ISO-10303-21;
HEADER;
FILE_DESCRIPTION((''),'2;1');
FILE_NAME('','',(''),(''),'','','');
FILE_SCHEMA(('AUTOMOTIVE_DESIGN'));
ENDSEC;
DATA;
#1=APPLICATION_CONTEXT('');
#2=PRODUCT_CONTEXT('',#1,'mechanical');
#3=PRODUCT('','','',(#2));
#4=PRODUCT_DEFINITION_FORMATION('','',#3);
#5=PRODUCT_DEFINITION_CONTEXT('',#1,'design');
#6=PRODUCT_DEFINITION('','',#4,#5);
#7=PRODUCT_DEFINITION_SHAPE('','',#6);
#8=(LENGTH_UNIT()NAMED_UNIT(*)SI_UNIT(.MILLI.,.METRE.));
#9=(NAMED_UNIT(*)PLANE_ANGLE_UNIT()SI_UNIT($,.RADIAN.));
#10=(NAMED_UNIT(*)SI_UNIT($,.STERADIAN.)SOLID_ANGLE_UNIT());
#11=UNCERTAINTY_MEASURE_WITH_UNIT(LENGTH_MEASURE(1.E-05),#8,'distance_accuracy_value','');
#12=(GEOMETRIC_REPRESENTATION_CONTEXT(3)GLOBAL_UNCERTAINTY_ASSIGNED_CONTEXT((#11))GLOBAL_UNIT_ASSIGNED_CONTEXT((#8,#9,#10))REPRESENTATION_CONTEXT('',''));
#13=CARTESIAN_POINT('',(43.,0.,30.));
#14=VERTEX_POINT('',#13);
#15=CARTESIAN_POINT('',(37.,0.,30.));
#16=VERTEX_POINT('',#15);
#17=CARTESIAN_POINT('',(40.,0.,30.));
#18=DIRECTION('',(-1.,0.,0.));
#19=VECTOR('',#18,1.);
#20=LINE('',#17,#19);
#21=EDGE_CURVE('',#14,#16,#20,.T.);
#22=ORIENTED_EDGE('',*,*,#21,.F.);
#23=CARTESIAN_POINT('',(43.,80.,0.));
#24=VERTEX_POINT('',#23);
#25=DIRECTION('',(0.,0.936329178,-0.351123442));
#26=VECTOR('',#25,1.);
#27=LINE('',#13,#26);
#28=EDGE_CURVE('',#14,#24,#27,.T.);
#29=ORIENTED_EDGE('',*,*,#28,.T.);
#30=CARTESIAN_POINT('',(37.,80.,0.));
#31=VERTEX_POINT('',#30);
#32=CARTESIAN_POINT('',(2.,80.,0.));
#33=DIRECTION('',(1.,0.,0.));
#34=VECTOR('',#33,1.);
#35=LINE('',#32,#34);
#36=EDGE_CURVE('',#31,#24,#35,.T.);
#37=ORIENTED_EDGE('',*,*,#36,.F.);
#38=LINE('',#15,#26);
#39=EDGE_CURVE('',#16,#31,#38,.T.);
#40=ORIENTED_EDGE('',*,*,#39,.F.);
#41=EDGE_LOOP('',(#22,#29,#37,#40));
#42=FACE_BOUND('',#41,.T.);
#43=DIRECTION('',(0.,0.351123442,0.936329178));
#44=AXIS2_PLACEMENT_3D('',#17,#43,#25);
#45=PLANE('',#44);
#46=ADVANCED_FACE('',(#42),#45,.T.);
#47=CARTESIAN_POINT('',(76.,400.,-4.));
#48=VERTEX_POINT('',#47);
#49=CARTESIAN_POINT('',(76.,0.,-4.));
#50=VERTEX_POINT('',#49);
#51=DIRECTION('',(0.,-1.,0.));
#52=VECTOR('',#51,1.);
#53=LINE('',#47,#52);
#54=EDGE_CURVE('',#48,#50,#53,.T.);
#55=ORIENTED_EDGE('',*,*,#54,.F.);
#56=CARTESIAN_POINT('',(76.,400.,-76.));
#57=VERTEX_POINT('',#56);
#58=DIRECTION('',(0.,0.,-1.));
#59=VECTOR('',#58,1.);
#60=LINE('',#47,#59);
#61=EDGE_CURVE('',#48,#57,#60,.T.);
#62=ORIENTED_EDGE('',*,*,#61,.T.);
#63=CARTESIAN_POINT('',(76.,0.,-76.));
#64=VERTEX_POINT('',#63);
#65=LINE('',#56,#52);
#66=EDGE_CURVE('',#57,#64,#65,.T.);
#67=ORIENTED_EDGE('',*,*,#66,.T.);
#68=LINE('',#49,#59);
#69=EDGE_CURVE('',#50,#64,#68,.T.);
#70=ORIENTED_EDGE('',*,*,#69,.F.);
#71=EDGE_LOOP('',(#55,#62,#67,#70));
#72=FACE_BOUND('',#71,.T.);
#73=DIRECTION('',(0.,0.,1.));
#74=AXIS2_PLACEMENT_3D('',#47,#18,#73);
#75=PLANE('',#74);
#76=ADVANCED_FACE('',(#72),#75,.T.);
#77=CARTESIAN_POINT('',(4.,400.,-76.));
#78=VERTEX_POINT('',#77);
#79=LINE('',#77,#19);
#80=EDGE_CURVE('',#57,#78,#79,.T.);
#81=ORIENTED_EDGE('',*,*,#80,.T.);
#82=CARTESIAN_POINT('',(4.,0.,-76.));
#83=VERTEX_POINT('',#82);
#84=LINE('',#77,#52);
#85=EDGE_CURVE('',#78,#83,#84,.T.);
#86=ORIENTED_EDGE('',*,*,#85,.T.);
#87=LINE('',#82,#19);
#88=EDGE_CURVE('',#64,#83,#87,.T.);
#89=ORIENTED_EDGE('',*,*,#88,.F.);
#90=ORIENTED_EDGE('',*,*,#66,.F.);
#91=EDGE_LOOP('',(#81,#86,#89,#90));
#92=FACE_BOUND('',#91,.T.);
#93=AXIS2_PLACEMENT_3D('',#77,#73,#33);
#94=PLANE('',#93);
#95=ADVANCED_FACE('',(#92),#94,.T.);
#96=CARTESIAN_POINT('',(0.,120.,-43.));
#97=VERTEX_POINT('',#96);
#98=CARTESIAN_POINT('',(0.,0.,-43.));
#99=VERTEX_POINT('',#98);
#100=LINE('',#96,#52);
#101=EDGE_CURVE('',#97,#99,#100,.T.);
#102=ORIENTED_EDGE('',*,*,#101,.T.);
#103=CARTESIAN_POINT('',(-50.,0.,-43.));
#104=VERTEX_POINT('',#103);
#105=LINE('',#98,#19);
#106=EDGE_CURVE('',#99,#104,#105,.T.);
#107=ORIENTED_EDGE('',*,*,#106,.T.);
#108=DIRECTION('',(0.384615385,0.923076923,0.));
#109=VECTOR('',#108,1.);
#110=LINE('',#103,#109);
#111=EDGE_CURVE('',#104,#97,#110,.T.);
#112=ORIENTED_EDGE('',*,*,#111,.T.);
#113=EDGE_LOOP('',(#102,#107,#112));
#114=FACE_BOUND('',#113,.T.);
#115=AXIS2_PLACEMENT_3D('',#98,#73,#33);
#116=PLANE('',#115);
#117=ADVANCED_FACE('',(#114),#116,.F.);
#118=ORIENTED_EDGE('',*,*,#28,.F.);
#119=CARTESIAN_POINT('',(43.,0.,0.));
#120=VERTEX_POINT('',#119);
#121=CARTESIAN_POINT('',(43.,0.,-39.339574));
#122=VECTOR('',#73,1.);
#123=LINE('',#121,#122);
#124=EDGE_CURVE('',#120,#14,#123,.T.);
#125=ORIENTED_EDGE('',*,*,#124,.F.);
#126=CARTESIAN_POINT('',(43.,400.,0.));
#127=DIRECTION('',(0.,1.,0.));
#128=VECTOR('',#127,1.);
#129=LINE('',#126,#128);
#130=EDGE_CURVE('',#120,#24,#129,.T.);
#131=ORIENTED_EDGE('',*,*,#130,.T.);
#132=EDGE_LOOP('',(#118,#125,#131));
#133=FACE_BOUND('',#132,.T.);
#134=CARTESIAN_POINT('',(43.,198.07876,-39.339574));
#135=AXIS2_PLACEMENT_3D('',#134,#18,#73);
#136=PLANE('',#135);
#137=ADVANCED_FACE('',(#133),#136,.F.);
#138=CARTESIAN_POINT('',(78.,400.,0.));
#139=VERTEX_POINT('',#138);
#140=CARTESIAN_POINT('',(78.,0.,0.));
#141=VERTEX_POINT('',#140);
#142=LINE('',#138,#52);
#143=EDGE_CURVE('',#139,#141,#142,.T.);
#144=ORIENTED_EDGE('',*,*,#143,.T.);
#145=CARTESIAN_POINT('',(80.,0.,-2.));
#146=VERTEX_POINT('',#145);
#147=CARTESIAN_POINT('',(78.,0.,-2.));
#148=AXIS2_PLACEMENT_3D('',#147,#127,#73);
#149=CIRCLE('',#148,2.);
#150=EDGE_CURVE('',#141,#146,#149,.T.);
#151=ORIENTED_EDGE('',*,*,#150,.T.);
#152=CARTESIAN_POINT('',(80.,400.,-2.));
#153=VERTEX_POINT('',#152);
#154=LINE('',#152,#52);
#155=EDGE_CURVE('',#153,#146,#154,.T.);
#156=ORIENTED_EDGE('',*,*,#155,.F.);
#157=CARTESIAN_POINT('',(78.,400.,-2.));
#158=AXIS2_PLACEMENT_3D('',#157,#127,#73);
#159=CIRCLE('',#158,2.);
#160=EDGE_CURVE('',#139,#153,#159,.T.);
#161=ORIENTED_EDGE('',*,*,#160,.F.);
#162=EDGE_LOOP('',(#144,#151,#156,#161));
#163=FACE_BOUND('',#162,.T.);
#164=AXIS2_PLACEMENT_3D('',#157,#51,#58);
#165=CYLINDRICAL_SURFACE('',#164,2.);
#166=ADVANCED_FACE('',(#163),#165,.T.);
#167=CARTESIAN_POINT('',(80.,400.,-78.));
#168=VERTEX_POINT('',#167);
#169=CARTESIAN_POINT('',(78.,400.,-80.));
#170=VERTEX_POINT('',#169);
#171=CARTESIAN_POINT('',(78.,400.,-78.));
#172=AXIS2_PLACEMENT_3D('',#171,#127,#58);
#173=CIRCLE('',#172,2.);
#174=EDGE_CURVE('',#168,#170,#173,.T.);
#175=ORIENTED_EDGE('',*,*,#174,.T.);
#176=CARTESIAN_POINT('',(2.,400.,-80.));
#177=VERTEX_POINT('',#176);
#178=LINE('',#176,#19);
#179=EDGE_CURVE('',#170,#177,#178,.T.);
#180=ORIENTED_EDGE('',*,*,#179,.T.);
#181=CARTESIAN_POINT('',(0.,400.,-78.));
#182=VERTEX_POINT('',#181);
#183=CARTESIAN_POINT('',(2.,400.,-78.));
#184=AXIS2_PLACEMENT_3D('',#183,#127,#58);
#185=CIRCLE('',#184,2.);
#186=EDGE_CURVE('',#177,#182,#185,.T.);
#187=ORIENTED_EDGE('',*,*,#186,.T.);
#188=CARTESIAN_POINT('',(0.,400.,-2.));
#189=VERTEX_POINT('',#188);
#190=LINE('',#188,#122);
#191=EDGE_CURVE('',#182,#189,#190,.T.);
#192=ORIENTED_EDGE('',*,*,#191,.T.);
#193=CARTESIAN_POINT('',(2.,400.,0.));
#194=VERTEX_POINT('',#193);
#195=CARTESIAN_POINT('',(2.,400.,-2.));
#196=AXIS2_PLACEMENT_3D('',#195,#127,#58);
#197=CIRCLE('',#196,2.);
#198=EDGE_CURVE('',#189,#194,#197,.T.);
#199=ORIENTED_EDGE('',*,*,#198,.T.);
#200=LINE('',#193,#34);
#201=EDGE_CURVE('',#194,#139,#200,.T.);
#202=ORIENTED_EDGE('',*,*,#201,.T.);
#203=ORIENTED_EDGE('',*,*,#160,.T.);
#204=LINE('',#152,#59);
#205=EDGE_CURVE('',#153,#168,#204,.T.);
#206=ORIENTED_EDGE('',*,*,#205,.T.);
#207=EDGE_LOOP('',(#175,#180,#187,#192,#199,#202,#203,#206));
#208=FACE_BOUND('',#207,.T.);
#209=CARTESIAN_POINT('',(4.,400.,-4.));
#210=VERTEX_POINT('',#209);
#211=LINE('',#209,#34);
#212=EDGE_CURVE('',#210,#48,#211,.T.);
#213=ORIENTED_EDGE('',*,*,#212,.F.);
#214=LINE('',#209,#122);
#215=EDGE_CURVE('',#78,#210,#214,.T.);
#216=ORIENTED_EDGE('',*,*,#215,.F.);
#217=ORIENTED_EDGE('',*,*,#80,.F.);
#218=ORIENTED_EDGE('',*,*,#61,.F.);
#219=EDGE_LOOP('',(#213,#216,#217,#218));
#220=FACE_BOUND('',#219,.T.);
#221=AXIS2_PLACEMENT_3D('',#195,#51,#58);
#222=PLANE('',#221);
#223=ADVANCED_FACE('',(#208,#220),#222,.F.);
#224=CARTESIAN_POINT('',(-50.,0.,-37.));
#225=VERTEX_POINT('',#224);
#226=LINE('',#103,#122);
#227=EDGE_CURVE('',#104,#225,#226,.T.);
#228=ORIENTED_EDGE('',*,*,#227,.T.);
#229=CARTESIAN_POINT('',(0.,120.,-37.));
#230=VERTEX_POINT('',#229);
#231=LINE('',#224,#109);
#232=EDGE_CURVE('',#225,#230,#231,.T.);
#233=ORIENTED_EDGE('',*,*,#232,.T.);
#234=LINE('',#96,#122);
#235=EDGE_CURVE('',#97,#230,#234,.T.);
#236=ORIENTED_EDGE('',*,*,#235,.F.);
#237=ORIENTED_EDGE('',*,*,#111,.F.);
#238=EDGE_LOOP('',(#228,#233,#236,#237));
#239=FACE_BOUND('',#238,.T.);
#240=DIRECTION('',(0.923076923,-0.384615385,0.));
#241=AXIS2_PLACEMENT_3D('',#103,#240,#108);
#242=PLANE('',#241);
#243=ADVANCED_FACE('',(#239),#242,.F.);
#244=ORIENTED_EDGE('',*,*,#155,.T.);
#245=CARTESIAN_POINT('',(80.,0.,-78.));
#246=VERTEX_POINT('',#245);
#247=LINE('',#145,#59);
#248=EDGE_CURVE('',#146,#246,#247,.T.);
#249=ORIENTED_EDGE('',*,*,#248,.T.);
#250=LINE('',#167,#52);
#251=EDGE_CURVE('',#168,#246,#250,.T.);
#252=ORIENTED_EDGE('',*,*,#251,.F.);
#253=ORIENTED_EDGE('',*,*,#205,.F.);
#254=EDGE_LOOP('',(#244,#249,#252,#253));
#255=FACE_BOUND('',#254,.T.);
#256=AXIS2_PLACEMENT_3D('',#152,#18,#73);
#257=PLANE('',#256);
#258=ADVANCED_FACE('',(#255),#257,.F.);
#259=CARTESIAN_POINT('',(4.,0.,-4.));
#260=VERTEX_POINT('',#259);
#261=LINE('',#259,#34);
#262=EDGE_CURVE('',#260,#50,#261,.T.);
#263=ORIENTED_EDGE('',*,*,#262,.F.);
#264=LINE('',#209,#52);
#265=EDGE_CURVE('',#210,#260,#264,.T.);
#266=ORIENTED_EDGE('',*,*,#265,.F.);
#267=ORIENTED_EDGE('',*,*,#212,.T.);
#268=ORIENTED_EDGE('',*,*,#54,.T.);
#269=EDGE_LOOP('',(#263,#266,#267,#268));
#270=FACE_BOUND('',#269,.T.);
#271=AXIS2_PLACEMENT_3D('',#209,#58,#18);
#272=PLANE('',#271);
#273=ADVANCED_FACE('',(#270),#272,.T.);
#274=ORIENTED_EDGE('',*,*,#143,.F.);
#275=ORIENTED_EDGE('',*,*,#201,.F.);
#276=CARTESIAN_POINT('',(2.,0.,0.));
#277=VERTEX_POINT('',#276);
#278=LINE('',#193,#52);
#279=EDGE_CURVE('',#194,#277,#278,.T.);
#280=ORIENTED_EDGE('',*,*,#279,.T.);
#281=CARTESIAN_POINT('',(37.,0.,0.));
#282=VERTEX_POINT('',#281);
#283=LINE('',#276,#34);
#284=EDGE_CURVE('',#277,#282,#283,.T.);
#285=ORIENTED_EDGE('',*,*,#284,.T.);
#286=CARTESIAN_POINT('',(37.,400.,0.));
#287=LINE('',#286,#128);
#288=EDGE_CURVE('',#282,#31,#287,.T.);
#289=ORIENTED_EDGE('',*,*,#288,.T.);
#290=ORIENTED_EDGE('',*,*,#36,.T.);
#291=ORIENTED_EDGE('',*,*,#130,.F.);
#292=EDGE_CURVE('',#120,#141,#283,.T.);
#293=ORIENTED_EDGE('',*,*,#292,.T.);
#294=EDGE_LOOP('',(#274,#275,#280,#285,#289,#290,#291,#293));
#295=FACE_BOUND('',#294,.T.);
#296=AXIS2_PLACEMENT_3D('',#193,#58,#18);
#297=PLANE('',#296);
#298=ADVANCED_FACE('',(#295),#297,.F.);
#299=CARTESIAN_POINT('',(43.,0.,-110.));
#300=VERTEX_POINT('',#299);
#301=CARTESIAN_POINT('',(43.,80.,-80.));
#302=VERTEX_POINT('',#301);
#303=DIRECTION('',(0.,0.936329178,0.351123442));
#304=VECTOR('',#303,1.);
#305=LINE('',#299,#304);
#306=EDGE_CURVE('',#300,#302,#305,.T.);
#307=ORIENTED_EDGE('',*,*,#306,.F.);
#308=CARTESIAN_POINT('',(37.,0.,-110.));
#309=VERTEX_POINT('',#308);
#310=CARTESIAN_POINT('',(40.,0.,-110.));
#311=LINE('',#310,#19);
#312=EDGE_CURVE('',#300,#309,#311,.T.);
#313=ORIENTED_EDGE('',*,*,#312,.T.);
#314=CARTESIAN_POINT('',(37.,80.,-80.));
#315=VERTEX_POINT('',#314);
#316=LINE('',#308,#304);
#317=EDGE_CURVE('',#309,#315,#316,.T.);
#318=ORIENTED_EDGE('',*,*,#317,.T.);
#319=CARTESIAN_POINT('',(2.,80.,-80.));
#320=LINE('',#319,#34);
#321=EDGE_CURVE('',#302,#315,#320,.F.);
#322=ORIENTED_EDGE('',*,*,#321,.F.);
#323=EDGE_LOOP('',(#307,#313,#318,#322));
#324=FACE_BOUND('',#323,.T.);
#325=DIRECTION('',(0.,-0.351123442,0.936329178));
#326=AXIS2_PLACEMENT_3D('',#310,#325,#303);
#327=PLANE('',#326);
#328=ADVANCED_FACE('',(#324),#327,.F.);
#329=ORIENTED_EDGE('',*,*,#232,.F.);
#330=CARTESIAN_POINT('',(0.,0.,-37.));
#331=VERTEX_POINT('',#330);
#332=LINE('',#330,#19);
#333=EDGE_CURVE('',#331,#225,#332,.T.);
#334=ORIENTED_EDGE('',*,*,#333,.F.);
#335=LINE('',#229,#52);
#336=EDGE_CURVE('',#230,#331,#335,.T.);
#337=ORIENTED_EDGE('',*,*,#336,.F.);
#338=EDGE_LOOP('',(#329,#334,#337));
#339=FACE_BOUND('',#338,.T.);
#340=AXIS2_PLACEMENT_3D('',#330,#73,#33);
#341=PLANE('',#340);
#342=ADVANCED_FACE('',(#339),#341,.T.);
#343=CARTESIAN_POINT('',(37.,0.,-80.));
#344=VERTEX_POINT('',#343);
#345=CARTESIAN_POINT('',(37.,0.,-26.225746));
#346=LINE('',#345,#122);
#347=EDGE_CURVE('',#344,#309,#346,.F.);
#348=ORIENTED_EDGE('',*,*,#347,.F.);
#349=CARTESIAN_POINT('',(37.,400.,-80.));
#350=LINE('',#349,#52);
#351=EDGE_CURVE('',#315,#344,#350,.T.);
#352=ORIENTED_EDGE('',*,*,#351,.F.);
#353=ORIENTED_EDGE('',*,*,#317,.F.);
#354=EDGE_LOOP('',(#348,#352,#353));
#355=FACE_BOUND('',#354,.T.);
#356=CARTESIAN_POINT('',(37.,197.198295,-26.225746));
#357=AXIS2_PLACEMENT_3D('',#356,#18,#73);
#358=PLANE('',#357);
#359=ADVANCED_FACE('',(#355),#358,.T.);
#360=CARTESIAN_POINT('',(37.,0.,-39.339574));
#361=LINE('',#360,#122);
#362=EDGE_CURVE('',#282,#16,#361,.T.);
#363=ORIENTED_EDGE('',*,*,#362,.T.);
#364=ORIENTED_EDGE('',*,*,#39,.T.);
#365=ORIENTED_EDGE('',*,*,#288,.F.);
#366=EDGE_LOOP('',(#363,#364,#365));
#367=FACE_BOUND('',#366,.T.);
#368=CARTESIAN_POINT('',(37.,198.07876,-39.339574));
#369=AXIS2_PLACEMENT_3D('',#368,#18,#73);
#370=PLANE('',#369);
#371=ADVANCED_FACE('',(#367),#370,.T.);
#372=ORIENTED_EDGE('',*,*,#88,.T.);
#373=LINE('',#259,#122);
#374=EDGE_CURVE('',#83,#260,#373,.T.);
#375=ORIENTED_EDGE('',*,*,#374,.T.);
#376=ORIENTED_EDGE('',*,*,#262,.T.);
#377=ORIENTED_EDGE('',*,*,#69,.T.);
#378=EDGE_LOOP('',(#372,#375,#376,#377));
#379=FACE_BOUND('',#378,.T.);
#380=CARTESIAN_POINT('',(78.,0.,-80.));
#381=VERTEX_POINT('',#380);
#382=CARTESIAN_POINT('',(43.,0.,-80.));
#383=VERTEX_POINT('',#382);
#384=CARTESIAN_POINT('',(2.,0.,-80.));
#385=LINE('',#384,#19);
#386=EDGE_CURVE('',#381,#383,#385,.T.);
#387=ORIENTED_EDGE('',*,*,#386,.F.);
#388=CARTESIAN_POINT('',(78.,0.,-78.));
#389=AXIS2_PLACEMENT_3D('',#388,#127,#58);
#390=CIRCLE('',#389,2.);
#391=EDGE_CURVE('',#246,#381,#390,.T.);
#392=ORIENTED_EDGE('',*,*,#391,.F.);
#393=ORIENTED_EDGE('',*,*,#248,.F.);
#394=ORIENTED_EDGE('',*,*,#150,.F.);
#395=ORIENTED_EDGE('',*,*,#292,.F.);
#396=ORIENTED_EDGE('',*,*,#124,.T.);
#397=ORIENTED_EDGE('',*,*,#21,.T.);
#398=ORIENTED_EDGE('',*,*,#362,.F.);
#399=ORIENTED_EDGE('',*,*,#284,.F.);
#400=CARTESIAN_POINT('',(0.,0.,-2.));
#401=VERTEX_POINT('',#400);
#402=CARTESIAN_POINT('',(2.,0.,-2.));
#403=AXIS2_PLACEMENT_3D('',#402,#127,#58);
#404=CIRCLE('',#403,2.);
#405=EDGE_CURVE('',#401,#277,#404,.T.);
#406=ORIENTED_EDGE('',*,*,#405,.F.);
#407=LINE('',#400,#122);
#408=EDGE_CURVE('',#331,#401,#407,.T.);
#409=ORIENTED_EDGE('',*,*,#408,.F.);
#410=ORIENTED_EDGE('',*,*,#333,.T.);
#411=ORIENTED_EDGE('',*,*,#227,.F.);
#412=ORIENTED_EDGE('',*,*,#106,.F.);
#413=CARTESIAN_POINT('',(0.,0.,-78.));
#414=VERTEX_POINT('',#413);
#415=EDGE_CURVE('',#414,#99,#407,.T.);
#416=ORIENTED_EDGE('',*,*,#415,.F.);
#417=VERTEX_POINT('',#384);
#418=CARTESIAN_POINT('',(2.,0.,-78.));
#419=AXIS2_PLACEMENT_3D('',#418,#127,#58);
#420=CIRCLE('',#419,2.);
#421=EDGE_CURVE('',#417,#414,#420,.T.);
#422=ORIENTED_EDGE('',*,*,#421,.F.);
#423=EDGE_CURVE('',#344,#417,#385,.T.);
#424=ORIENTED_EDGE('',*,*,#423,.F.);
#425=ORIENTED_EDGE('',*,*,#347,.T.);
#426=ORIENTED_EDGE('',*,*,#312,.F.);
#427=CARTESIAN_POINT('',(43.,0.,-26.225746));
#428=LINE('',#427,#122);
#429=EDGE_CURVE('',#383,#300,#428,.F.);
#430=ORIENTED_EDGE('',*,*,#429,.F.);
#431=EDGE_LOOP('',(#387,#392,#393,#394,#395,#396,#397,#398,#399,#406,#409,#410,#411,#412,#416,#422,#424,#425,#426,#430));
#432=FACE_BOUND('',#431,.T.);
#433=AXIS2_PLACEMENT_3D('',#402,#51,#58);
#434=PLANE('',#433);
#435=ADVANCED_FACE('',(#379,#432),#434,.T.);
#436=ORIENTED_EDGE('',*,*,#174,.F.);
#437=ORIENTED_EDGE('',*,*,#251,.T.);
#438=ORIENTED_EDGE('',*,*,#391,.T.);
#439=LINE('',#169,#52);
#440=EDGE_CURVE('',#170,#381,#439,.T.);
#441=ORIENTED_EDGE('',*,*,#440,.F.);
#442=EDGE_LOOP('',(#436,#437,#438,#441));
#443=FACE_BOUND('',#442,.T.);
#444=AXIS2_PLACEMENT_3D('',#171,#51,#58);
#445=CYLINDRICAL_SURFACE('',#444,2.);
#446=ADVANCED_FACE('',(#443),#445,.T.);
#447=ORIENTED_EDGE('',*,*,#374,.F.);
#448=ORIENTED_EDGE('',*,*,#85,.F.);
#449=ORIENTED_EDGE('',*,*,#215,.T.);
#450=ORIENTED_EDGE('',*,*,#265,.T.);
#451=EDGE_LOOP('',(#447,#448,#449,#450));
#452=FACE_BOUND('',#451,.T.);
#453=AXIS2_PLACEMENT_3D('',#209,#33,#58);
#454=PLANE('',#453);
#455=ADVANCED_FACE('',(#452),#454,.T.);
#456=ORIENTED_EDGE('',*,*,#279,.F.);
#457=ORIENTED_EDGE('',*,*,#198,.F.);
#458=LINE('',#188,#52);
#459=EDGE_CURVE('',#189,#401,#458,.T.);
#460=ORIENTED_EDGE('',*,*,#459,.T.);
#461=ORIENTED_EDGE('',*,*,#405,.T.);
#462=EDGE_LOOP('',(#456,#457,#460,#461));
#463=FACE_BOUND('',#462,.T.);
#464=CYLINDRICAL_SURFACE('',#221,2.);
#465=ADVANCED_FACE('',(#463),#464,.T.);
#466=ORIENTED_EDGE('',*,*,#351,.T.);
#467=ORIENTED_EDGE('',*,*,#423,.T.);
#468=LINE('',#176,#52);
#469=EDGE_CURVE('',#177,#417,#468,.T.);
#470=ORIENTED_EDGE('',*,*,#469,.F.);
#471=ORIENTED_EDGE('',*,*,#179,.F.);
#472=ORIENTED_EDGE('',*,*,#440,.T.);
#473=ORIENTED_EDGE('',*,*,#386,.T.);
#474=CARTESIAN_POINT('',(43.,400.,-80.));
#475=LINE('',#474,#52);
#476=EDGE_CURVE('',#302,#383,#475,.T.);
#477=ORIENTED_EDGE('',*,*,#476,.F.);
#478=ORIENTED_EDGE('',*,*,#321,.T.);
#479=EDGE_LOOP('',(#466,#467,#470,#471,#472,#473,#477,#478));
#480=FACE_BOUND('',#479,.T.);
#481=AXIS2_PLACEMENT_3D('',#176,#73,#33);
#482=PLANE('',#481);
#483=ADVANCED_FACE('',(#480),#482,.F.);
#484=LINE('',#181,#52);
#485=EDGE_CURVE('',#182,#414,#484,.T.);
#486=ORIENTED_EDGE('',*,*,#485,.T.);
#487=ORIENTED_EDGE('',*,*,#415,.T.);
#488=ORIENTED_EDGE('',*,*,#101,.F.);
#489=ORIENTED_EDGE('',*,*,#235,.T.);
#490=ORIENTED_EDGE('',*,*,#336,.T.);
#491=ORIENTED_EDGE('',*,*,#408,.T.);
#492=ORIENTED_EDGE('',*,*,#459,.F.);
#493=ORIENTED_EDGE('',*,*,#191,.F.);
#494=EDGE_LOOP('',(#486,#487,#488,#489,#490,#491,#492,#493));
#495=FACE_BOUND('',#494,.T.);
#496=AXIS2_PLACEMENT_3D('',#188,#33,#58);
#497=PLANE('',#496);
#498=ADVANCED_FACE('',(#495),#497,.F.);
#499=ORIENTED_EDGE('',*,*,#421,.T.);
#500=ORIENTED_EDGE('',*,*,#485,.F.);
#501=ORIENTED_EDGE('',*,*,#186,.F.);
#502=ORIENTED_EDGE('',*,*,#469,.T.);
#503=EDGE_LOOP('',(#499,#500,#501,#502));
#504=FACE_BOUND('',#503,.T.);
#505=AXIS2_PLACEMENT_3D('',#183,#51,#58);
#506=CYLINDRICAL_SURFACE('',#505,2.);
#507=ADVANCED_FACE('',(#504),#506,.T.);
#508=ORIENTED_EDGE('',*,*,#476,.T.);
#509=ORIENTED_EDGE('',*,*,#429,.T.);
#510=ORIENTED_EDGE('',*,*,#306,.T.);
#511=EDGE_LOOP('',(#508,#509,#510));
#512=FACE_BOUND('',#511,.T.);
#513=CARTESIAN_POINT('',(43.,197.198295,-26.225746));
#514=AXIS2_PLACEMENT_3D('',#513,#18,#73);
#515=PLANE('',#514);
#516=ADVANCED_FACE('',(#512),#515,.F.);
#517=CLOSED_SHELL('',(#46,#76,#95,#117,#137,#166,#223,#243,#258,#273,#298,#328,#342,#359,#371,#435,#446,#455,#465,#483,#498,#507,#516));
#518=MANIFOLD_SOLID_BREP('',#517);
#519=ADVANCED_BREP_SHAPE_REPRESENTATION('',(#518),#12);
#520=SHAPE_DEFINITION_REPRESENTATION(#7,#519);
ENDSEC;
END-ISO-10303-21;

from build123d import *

# Parameters (mm, degrees)
SKETCH1_W           = 72
SKETCH1_H           = 72
BOSS_EXTRUDE1_DEPTH = 400
RIB2_START          = -3
RIB2_DEPTH          = 6
BOSS_EXTRUDE2_DEPTH = 3


# Read off the part's stored shape, not the designer's step: Rib2
with BuildPart() as part:
    # Sketch1 → Boss-Extrude1 (new body)
    with BuildSketch(Plane(origin=(0, 0, 0), x_dir=(1, 0, 0), z_dir=(0, 1, 0))):
        with BuildLine():
            Line((2, 0), (78, 0))
            ThreePointArc((78, 0), (79.414213562, 0.585786438), (80, 2))
            Line((80, 2), (80, 78))
            ThreePointArc((80, 78), (79.414213562, 79.414213562), (78, 80))
            Line((78, 80), (2, 80))
            ThreePointArc((2, 80), (0.585786438, 79.414213562), (0, 78))
            Line((0, 78), (0, 2))
            ThreePointArc((0, 2), (0.585786438, 0.585786438), (2, 0))
        make_face()
        with Locations((40, 40)):
            Rectangle(SKETCH1_W, SKETCH1_H, mode=Mode.SUBTRACT)
    extrude(amount=BOSS_EXTRUDE1_DEPTH)

    # Rib2 outline → Rib2 (add)
    with BuildSketch(Plane.ZY.offset(-40).offset(RIB2_START)):
        Polygon((0, 80), (0, 0), (30, 0), align=None)
    rib2 = extrude(amount=RIB2_DEPTH)

    # Mirror1: Rib2 across plane
    add(rib2.mirror(Plane(origin=(0, 0, -40), x_dir=(1, 0, 0), z_dir=(0, 0, -1))))

    # Sketch4 → Boss-Extrude2 (add, symmetric)
    with BuildSketch(Plane(origin=(0, 0, -40), x_dir=(-1, 0, 0), z_dir=(0, 0, -1))):
        Polygon((50, 0), (0, 120), (0, 0), align=None)
    extrude(amount=BOSS_EXTRUDE2_DEPTH, both=True)


solid = part.part
